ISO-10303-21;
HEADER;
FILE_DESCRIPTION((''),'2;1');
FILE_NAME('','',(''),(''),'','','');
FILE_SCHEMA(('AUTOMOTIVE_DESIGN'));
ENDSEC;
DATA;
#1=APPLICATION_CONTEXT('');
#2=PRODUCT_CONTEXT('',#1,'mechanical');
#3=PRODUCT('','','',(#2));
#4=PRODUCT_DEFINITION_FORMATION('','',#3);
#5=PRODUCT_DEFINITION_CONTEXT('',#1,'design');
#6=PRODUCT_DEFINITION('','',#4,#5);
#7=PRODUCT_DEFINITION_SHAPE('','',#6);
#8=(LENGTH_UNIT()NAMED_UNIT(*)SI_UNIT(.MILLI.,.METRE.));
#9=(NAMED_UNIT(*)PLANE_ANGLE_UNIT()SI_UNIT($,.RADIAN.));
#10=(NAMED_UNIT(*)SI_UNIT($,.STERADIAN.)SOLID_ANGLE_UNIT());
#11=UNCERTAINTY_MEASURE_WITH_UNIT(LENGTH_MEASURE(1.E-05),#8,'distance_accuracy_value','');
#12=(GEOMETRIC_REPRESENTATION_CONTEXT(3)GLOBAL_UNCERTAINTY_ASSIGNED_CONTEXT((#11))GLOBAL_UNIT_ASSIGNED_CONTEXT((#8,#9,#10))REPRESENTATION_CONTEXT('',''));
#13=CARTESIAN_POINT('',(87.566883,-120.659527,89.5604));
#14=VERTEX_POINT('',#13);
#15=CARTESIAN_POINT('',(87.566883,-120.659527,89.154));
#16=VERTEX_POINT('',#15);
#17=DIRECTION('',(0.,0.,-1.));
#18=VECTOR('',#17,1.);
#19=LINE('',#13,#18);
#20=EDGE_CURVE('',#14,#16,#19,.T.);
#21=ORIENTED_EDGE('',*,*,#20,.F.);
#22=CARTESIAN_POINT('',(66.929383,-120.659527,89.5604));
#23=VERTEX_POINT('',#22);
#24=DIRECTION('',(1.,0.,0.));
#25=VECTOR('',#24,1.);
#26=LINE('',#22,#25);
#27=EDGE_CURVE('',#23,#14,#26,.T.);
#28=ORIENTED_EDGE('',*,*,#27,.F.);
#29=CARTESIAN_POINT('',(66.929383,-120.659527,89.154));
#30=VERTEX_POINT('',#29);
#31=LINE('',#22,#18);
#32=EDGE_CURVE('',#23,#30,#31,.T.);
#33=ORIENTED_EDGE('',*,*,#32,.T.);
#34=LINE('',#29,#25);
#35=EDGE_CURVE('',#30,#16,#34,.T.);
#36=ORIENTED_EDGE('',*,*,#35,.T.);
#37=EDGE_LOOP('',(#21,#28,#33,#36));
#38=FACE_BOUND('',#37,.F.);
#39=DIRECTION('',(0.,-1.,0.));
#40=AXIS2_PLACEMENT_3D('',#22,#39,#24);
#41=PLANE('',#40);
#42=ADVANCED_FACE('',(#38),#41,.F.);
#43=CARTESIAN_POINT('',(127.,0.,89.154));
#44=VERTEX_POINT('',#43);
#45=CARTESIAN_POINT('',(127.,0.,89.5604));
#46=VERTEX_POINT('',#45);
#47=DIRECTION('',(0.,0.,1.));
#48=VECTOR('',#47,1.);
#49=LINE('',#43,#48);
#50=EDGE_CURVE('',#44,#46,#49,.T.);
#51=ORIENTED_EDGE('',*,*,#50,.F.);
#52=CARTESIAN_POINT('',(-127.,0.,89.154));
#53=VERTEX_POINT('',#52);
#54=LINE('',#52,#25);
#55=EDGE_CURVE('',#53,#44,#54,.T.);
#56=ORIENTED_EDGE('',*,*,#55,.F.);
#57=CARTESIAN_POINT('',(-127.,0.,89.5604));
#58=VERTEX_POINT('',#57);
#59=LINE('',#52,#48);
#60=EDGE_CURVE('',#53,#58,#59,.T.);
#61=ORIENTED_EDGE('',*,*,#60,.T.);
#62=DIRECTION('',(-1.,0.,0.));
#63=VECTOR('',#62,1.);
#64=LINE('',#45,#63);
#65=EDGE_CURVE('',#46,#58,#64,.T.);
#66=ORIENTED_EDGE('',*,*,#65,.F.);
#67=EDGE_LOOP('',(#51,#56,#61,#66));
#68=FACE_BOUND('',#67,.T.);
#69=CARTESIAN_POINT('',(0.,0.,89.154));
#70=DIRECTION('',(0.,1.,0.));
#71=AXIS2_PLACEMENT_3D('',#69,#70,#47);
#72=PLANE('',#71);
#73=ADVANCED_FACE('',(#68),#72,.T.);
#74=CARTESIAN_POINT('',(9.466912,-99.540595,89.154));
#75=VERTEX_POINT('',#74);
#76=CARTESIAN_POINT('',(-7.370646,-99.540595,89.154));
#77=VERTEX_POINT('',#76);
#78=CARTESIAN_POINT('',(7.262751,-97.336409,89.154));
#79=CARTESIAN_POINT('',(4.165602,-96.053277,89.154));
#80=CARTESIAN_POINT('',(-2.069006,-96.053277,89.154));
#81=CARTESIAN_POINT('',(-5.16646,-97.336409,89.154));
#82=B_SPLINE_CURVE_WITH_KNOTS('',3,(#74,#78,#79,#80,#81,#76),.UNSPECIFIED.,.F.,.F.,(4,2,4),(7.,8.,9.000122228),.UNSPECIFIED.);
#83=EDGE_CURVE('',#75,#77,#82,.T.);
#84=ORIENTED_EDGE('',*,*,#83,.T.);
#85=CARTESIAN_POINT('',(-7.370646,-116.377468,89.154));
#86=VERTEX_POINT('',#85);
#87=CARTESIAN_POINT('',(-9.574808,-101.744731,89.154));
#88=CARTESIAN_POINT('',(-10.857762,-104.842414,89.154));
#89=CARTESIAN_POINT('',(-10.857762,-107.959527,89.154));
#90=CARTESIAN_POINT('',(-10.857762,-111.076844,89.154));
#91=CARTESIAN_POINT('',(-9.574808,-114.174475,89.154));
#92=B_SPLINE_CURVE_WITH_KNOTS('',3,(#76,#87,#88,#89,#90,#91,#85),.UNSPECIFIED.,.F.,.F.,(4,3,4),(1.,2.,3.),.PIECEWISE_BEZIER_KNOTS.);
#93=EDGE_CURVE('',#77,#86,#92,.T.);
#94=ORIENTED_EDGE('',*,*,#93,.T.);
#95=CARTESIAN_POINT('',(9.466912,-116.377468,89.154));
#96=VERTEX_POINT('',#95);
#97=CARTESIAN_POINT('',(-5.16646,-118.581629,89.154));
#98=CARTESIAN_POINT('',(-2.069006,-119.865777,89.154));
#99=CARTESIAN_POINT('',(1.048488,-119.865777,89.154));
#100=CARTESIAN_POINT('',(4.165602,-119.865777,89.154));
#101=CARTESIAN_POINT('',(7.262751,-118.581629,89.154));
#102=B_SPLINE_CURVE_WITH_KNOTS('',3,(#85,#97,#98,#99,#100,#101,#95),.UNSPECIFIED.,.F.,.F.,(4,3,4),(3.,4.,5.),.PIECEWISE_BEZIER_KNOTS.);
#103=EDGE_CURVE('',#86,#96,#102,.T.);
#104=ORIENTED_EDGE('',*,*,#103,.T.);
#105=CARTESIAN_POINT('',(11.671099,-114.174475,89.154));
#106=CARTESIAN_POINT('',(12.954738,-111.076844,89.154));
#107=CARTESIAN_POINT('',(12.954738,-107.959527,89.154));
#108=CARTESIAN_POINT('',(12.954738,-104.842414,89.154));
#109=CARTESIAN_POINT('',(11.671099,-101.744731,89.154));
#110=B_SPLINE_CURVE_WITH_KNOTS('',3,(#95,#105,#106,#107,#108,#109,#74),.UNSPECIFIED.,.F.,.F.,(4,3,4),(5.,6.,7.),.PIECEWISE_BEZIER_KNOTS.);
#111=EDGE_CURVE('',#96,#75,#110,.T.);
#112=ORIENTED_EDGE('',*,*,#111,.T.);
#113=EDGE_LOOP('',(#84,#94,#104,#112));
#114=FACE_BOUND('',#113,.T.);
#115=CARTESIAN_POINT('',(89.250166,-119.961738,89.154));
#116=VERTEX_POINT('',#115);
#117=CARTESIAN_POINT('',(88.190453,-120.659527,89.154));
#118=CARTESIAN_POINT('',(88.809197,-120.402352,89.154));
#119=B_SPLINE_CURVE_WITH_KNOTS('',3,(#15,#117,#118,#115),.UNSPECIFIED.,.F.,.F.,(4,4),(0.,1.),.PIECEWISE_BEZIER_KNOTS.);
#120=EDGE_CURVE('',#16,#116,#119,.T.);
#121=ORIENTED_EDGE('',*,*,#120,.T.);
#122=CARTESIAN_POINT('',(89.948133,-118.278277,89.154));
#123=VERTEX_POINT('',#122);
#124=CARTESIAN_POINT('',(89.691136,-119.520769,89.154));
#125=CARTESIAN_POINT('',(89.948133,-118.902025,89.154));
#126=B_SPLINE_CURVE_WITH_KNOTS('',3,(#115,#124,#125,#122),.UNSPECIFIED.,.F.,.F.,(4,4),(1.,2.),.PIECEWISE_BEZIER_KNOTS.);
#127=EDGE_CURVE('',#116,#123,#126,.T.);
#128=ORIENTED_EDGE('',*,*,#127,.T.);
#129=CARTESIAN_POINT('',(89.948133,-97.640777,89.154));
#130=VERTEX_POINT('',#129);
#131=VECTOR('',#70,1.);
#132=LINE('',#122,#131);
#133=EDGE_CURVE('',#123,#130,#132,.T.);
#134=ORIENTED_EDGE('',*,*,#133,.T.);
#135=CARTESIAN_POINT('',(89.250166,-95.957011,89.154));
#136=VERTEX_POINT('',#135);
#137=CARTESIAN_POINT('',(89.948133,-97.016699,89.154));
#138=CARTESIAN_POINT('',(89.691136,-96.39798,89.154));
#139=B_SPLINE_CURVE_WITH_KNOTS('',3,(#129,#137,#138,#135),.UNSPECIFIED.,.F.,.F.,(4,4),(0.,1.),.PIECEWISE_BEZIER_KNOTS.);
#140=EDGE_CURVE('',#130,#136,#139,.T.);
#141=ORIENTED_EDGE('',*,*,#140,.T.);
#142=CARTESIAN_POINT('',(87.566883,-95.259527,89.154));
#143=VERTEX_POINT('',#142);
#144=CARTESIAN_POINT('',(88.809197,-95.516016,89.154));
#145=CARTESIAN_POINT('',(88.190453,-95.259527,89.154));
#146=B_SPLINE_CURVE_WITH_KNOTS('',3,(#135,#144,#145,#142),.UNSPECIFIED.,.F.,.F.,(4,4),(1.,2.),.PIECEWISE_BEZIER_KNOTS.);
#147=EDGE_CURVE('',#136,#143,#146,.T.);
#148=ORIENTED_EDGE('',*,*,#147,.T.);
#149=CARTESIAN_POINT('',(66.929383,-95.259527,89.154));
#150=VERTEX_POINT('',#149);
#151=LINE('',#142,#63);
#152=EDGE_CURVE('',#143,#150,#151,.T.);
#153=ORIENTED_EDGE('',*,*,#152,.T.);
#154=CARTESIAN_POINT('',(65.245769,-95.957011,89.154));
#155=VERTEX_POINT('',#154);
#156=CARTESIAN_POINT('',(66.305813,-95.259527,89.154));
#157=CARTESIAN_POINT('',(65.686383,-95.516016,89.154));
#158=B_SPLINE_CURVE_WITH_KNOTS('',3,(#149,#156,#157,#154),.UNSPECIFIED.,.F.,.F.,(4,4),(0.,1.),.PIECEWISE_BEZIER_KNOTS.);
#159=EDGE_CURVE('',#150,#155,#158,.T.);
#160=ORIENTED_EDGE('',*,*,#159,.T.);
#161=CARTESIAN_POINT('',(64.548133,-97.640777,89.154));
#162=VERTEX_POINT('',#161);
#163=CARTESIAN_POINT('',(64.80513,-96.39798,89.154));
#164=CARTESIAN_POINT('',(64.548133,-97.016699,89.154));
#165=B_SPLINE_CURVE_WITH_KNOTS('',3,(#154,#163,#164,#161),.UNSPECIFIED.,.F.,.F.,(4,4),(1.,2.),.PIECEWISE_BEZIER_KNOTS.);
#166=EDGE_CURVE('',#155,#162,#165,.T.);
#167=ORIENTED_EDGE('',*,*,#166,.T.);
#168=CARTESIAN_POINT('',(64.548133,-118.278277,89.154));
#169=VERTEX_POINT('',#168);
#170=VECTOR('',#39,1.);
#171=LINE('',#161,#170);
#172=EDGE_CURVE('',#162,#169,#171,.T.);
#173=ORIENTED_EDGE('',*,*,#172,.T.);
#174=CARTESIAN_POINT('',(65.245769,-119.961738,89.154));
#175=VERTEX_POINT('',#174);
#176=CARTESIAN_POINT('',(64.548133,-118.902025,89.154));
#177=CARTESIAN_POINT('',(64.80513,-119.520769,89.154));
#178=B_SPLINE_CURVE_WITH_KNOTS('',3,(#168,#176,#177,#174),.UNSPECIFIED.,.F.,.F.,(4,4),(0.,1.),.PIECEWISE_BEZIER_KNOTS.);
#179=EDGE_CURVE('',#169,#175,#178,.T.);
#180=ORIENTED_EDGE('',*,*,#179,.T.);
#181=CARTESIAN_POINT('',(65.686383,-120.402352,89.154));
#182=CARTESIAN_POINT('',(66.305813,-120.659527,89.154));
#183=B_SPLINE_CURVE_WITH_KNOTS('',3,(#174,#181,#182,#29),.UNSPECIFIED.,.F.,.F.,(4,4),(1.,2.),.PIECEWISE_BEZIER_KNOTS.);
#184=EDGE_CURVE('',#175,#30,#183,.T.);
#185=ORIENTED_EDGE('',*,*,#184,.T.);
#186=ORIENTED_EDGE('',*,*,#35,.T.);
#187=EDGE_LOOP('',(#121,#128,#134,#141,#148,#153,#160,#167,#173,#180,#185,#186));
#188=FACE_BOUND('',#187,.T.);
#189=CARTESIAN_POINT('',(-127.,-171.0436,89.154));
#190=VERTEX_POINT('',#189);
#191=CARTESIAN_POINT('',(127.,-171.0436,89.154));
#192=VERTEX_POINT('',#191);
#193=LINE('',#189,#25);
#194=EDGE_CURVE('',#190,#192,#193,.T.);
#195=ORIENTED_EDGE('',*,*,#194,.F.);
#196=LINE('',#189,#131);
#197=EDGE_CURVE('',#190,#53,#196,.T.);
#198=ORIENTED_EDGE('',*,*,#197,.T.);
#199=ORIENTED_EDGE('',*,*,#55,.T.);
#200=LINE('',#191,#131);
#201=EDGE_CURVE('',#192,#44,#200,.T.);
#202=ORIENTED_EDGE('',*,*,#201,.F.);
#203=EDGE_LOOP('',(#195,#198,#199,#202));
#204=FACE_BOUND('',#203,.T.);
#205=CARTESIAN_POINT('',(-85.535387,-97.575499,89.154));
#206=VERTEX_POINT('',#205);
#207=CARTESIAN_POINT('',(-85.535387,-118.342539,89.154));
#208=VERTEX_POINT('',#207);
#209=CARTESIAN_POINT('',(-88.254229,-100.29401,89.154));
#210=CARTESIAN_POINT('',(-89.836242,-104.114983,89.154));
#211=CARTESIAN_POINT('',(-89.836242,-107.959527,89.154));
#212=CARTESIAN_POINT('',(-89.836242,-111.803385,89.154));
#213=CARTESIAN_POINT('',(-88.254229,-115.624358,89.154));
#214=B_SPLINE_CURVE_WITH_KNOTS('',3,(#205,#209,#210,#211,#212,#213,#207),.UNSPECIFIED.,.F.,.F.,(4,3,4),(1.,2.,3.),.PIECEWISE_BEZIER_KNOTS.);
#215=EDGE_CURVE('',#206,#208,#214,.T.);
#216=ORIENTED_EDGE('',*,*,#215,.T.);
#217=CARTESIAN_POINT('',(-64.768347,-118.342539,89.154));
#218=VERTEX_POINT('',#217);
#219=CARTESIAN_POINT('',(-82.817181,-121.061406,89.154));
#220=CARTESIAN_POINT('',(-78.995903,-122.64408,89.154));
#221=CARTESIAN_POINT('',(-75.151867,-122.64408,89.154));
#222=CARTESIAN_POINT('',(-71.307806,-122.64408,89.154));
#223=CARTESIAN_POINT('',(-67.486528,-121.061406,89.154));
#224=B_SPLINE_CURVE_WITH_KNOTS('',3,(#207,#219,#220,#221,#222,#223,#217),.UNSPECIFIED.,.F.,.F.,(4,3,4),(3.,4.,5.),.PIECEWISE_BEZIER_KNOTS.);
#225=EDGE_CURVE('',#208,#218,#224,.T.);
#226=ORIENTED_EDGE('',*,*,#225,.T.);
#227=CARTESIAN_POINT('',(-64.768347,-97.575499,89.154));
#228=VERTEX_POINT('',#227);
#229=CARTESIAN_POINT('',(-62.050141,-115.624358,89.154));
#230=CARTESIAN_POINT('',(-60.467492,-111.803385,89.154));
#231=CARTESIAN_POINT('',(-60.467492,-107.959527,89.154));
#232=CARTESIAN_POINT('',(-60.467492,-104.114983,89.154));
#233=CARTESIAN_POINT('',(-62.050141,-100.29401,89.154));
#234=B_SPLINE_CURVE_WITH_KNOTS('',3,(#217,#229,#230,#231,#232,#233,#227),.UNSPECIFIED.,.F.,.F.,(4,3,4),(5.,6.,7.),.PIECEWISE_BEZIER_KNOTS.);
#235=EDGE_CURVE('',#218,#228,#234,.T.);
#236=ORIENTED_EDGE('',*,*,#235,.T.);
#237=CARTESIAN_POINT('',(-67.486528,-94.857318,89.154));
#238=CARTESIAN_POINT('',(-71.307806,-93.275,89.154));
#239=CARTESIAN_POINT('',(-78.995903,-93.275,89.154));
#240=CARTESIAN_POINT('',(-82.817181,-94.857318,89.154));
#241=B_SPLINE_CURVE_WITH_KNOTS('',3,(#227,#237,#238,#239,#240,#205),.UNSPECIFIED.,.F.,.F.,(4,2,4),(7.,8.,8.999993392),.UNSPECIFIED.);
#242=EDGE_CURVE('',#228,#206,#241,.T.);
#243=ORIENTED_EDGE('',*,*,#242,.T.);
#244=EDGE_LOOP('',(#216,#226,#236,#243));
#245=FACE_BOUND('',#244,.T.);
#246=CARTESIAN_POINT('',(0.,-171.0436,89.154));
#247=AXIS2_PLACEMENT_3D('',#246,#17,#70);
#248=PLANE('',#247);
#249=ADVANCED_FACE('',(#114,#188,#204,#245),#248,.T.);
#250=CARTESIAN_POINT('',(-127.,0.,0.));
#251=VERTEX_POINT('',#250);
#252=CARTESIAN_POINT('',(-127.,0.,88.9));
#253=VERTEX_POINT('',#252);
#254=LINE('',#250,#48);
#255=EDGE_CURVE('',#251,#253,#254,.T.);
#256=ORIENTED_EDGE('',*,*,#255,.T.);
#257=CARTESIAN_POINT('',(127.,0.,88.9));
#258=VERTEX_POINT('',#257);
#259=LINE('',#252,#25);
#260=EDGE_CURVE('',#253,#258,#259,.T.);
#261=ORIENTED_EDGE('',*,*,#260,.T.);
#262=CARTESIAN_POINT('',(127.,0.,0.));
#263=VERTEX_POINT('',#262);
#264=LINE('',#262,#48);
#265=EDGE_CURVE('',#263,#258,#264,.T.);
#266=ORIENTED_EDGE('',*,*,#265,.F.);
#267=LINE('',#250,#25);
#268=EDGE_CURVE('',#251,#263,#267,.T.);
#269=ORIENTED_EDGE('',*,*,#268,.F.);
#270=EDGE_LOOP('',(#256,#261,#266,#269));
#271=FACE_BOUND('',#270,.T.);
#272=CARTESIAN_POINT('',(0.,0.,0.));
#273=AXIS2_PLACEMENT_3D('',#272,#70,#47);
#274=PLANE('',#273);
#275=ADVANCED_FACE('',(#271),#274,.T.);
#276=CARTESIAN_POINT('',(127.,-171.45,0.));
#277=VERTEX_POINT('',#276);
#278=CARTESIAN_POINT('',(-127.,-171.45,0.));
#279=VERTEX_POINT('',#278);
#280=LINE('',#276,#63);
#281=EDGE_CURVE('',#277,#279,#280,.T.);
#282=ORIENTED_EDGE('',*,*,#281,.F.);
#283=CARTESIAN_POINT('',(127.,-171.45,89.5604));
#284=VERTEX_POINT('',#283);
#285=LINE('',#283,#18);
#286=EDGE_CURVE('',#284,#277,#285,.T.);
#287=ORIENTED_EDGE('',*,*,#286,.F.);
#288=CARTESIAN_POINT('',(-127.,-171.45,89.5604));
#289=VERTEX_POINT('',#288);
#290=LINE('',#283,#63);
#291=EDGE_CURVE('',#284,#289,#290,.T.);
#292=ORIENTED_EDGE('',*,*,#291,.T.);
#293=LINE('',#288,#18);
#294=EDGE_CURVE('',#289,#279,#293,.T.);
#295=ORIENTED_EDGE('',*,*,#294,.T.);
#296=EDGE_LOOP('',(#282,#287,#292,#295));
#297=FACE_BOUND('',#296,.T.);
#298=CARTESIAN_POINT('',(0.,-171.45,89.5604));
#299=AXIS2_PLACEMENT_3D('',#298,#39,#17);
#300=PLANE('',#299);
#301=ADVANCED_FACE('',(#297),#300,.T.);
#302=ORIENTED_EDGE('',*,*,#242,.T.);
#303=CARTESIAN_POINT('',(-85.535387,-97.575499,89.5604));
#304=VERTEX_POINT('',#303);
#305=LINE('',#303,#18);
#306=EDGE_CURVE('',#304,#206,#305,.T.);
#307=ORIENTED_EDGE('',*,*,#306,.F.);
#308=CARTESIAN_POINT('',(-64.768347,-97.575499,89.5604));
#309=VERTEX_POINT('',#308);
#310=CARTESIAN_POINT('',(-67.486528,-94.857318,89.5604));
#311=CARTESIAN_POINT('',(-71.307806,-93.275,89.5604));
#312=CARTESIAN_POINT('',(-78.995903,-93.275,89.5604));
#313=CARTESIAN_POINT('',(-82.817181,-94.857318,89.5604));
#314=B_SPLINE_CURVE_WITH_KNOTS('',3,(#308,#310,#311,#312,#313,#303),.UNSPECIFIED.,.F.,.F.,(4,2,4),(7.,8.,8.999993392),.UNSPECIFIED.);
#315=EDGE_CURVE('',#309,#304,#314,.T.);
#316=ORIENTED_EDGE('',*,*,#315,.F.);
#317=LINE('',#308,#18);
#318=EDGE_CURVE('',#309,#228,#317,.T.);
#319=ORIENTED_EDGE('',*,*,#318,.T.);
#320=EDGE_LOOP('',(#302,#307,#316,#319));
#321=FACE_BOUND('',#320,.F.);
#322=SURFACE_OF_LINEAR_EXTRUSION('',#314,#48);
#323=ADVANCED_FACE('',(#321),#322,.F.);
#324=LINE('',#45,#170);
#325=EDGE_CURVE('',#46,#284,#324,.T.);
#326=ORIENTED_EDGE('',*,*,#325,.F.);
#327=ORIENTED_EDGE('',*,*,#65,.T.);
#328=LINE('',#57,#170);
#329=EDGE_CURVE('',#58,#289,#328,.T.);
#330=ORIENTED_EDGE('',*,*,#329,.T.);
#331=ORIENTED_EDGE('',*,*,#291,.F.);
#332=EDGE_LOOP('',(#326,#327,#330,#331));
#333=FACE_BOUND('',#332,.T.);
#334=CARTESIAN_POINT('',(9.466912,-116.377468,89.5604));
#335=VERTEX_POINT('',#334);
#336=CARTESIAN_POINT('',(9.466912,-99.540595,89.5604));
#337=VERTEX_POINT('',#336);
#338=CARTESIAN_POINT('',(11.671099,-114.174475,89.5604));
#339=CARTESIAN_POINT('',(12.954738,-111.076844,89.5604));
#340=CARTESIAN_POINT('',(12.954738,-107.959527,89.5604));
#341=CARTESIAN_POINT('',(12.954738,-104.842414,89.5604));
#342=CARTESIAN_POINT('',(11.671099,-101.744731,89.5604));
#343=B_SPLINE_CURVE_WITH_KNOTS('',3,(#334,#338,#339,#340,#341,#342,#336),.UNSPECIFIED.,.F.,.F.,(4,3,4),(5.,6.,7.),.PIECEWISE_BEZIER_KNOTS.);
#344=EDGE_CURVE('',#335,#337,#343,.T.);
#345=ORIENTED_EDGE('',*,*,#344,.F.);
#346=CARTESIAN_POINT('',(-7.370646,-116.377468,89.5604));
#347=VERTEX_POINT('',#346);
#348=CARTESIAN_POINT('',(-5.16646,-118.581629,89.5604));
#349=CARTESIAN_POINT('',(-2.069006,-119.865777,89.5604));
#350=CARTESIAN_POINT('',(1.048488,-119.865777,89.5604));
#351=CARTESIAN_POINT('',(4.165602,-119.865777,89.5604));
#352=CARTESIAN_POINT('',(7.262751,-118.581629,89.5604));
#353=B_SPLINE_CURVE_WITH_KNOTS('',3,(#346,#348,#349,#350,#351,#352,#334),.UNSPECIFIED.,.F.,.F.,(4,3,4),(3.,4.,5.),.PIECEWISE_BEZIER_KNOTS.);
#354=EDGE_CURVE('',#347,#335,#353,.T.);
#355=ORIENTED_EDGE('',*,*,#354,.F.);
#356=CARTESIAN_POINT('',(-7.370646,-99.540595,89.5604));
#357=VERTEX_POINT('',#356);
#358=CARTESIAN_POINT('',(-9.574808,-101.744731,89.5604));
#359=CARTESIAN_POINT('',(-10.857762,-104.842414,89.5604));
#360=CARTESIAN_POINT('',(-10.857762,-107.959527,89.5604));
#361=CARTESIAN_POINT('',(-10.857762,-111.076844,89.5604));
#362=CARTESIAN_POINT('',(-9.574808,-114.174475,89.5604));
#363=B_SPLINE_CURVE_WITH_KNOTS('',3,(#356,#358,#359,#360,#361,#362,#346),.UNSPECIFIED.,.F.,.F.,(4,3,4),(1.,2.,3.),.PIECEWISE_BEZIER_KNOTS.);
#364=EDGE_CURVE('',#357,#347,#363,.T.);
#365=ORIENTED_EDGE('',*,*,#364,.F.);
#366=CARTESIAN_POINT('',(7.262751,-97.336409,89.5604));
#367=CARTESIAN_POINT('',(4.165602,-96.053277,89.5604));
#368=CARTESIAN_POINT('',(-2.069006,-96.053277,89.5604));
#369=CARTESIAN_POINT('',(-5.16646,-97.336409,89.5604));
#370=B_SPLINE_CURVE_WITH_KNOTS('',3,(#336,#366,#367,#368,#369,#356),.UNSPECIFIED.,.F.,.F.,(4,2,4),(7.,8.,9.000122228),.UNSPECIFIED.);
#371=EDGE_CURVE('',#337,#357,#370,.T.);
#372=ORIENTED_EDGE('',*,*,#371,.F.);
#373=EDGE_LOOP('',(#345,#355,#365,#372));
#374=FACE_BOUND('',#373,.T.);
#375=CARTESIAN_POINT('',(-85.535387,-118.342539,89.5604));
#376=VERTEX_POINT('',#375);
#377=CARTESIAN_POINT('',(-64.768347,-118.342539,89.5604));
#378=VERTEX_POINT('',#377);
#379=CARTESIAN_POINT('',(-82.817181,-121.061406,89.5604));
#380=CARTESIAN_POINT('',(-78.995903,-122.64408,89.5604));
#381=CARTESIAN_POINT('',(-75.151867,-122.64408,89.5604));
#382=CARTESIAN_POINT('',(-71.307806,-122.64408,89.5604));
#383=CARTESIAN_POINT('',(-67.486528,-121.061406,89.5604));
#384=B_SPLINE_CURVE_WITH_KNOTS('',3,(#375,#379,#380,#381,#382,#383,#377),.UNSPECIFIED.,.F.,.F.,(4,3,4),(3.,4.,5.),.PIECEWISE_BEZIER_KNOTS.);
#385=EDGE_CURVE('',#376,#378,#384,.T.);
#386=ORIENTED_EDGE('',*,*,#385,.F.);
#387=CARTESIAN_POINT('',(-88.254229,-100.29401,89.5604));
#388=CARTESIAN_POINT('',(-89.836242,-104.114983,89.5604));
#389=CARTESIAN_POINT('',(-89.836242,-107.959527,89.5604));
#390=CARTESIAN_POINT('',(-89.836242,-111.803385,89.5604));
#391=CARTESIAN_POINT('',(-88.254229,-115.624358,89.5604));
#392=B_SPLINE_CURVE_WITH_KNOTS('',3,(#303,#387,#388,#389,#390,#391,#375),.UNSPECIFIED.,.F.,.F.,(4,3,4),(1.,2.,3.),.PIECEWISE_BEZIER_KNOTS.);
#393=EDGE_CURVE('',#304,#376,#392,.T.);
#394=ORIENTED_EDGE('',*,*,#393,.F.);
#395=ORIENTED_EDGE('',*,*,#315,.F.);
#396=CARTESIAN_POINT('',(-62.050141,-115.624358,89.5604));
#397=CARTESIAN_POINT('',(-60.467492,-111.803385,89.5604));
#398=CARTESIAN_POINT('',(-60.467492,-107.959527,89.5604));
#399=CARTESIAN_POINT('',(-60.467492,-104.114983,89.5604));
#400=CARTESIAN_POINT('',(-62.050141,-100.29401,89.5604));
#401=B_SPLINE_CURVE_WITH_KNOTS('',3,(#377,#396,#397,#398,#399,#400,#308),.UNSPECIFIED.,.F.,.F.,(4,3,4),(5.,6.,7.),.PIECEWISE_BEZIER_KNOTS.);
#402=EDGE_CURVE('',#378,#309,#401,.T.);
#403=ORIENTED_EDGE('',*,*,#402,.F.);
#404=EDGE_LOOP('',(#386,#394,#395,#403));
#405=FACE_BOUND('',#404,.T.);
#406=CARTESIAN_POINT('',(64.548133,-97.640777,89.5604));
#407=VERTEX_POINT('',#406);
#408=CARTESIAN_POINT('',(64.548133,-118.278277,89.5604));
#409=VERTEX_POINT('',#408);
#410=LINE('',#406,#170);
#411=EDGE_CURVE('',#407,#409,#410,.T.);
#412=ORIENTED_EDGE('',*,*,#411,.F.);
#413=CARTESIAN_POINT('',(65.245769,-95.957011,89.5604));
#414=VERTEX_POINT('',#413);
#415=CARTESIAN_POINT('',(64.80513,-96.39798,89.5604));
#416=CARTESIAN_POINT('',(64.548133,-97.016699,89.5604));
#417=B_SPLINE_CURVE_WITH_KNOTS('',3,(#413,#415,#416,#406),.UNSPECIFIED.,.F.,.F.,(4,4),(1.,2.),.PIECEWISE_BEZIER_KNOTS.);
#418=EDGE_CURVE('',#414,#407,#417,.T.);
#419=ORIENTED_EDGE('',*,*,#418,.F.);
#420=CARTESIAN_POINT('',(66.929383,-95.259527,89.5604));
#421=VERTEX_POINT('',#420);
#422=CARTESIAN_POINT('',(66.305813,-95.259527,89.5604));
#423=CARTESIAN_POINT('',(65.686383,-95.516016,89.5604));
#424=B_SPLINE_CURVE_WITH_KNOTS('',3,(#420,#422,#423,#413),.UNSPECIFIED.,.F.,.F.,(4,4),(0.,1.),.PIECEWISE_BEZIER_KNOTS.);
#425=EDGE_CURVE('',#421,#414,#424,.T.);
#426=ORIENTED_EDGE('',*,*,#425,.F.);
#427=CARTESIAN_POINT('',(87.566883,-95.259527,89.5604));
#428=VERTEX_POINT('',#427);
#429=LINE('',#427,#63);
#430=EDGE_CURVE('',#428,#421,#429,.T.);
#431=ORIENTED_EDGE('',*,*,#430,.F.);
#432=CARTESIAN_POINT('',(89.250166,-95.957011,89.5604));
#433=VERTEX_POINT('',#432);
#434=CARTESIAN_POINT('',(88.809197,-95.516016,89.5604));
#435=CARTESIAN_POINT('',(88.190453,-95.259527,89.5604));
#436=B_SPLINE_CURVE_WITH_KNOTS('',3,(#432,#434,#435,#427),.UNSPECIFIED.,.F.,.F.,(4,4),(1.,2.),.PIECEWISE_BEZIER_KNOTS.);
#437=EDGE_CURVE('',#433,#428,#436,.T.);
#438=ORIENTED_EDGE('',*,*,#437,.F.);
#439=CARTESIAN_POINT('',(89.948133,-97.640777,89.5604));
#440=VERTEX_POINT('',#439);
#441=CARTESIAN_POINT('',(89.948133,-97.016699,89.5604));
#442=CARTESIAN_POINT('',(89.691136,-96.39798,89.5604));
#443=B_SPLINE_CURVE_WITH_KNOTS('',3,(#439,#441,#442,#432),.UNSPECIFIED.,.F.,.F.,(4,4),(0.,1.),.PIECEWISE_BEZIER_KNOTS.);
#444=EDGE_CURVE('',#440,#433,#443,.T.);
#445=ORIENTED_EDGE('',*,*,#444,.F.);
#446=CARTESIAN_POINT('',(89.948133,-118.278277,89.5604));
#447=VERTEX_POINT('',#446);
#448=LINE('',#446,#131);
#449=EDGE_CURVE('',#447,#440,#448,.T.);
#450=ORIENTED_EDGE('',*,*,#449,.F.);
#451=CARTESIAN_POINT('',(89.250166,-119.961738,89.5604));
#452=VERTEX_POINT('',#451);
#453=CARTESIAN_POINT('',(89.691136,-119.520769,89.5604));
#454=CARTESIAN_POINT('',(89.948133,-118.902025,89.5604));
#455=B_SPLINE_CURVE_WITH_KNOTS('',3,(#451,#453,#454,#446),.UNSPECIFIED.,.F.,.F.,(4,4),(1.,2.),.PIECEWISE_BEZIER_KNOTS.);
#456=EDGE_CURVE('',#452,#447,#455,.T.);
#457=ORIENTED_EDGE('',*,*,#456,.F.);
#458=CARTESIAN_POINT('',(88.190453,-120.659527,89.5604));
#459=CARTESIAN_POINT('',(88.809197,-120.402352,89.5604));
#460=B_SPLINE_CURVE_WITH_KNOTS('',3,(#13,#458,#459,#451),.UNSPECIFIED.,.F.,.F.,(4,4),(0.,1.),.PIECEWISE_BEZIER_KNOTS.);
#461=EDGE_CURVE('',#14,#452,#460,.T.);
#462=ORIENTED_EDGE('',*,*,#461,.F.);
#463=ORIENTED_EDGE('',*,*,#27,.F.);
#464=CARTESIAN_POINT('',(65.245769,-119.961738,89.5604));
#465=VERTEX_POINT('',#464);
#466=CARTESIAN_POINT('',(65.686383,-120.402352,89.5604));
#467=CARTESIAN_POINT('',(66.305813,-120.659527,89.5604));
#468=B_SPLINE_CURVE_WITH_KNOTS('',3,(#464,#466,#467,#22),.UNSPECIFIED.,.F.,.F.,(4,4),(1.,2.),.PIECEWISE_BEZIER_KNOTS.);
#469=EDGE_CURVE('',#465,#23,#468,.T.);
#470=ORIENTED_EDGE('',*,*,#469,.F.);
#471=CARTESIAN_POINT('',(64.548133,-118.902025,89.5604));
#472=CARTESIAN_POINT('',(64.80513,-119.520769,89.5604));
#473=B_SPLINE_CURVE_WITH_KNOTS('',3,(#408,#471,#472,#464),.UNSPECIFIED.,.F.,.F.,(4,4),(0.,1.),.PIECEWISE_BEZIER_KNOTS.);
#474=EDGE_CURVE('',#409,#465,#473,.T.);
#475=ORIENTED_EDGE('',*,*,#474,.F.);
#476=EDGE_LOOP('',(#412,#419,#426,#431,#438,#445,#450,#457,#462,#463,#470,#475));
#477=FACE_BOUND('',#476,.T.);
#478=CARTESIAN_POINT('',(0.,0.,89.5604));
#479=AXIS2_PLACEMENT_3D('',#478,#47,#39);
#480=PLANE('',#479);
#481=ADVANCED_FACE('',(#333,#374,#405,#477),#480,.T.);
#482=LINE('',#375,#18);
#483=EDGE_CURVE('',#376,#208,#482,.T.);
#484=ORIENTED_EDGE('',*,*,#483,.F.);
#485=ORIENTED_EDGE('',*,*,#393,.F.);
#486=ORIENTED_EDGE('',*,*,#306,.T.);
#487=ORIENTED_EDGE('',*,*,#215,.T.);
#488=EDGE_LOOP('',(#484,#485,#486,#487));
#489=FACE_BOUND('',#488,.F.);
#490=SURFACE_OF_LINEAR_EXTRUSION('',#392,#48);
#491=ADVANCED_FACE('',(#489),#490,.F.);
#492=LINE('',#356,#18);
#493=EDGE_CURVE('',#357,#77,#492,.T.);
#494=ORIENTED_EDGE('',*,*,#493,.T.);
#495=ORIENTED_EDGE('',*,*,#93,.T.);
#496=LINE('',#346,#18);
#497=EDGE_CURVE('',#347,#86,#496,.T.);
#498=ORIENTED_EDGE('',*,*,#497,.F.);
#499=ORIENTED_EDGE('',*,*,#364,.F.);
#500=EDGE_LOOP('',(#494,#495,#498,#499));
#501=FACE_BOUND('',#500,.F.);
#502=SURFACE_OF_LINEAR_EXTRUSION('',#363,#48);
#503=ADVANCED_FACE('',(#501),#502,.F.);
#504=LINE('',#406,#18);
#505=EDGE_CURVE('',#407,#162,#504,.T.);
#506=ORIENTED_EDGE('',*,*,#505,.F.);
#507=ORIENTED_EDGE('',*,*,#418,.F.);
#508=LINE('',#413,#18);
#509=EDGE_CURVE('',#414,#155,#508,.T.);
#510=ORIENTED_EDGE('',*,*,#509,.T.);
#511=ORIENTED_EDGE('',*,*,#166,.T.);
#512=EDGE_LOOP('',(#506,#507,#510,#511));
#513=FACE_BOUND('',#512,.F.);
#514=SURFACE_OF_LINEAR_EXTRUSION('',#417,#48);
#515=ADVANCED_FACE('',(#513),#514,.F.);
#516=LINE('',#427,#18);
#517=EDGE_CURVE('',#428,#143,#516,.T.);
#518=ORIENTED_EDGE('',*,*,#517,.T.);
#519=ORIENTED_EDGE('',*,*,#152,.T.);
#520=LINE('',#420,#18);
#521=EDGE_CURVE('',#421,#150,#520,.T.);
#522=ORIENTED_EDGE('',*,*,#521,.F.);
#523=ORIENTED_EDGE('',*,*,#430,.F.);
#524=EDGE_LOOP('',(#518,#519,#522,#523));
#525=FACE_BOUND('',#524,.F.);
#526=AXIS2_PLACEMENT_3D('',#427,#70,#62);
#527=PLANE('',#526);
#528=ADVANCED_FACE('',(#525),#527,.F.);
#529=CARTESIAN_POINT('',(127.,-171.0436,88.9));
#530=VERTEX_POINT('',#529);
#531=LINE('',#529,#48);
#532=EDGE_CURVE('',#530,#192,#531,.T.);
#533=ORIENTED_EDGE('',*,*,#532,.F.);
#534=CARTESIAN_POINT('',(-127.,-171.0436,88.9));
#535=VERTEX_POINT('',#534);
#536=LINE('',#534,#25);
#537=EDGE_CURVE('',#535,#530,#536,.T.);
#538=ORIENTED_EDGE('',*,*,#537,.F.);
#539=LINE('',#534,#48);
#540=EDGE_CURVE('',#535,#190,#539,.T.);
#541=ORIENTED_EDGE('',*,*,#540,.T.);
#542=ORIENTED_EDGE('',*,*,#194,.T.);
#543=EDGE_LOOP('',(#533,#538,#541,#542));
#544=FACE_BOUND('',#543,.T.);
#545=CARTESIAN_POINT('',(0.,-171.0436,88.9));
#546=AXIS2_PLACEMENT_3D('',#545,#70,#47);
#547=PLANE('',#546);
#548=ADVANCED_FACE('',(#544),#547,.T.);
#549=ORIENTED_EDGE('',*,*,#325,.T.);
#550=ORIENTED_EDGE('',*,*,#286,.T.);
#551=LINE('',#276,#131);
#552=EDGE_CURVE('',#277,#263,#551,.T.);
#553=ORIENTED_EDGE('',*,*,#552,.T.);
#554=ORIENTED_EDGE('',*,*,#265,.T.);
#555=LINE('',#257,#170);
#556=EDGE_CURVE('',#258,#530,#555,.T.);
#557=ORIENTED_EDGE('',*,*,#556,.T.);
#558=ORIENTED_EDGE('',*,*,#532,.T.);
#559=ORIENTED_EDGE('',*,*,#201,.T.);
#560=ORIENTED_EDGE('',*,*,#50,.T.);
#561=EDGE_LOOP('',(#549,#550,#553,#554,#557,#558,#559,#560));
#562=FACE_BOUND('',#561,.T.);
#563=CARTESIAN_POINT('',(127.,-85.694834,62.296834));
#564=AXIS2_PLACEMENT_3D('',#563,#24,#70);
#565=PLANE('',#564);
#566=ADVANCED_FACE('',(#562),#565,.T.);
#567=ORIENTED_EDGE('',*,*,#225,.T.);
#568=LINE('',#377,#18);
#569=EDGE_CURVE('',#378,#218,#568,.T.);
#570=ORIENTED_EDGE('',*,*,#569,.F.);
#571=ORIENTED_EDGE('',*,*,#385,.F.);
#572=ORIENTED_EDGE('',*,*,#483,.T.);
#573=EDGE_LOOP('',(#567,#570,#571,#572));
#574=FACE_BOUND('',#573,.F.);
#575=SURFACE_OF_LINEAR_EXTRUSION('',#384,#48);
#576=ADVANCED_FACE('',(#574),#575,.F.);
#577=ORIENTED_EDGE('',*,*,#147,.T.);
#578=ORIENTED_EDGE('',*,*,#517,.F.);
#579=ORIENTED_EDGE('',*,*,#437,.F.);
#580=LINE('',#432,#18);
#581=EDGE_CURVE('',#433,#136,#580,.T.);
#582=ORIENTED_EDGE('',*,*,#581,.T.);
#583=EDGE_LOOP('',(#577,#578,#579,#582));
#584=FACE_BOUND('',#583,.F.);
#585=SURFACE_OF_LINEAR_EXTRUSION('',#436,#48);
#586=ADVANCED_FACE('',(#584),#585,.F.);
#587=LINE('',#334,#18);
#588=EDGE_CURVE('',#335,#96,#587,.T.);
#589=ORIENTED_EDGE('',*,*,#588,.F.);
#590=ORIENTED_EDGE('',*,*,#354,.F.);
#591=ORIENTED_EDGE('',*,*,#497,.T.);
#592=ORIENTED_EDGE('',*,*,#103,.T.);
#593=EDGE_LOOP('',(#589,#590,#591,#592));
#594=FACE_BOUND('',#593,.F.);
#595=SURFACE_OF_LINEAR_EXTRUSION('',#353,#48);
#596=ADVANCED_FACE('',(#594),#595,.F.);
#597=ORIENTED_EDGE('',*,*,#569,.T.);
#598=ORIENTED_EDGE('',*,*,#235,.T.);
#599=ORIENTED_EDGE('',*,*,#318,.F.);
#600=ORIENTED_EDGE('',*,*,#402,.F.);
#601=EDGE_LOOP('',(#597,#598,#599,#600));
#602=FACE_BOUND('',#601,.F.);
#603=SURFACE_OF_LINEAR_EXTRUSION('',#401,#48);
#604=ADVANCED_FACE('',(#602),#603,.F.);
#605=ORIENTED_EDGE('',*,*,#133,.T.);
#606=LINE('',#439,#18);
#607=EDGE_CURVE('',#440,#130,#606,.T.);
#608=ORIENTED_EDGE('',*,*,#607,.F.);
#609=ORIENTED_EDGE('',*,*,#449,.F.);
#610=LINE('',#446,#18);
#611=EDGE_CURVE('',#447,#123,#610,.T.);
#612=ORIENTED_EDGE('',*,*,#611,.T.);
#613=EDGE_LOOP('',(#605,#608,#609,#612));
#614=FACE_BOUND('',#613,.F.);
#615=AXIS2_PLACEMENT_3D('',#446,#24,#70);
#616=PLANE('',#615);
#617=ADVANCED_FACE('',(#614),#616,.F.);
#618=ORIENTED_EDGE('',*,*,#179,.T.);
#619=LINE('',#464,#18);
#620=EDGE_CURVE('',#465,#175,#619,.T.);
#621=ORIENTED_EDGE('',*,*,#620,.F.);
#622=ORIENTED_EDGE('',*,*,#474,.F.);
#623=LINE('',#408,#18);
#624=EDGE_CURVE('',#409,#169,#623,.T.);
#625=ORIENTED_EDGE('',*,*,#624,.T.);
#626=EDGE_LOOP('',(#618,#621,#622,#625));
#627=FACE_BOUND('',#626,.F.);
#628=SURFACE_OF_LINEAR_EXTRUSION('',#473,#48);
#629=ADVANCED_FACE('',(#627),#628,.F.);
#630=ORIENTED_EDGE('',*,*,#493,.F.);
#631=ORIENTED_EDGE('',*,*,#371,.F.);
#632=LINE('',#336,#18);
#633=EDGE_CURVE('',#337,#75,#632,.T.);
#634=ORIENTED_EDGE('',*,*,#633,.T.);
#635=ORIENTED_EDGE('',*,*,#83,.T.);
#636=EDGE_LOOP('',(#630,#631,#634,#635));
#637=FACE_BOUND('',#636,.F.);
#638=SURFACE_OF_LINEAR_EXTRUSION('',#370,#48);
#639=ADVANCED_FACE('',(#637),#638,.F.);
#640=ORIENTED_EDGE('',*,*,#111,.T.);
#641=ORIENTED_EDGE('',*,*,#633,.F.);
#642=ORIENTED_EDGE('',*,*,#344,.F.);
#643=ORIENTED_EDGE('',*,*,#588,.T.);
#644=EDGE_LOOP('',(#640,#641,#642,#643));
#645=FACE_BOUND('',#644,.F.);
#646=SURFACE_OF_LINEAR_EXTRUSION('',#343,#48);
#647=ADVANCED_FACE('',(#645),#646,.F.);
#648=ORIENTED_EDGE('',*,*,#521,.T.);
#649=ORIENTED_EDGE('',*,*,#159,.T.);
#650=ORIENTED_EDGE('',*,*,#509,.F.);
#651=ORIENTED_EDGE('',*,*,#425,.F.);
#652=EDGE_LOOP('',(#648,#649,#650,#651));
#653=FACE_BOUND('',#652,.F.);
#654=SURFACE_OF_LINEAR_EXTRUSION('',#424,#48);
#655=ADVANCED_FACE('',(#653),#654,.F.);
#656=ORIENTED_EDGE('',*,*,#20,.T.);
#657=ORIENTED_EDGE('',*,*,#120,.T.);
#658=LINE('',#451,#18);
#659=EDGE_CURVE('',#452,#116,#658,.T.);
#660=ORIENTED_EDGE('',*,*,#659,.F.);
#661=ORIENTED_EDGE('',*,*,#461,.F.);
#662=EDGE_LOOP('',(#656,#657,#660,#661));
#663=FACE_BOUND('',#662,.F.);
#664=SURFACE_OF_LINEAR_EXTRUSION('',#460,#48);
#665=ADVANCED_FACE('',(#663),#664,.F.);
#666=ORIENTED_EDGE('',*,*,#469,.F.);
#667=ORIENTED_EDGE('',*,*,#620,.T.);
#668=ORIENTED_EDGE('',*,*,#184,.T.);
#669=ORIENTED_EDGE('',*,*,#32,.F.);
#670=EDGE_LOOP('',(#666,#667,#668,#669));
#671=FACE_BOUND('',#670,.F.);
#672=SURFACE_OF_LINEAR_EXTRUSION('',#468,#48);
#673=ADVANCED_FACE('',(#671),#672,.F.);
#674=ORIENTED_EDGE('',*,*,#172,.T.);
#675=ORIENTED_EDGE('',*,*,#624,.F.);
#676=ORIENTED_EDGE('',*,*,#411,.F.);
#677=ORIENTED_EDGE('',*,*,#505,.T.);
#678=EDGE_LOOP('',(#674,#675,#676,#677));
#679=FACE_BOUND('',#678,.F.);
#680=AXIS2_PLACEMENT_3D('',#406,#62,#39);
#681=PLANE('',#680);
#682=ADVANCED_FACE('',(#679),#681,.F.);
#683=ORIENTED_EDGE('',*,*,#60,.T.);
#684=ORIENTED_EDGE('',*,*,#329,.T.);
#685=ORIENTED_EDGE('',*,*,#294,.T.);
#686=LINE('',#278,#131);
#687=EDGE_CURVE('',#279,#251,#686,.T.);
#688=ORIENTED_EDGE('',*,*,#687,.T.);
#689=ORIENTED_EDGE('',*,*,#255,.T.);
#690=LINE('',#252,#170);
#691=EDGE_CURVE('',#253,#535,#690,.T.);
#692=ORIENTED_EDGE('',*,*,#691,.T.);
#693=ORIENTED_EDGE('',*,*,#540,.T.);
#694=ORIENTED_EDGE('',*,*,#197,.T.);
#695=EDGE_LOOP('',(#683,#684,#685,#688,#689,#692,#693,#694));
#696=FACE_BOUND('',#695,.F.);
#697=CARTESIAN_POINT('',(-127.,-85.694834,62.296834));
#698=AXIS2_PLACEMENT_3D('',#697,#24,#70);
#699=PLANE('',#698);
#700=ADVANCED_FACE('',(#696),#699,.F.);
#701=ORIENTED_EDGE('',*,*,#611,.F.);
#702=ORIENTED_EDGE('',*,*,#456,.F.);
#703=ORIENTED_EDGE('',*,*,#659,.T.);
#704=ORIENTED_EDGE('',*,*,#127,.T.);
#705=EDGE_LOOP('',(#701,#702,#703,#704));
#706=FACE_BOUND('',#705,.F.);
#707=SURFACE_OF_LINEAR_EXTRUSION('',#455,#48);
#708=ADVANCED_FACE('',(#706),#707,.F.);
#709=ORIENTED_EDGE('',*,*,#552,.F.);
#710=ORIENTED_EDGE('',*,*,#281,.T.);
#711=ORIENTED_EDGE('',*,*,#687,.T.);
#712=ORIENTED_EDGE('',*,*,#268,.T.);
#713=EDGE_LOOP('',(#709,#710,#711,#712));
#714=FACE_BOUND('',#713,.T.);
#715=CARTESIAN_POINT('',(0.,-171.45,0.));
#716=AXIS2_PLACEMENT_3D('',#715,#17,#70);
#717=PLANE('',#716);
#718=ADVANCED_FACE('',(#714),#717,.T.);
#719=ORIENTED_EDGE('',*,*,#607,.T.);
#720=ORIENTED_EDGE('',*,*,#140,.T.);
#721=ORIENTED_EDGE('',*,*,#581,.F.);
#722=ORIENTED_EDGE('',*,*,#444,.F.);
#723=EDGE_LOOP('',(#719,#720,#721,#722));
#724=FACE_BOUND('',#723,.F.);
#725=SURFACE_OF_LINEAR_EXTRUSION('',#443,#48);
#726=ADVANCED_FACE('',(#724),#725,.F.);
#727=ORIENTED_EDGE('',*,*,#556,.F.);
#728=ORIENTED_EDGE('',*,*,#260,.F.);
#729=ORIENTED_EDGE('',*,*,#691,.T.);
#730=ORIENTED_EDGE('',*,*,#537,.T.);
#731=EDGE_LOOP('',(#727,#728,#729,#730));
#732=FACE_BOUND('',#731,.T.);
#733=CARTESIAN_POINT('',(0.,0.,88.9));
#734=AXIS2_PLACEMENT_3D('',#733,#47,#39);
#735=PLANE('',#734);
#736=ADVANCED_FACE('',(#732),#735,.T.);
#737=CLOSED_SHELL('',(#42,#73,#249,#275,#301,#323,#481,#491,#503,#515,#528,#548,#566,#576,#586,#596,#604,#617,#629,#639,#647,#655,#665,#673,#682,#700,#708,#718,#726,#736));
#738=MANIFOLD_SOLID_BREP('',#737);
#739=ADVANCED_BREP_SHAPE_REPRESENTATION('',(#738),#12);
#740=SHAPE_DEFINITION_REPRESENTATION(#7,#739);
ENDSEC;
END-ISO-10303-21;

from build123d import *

# Parameters (mm, degrees)
F1_DEPTH = 127
F3_DEPTH = 0.4064


# Not quite as in the source:
# - the dataset's text gives a spline's control points without its knots; the knots are read off the source's solid


with BuildPart() as f1:
    # F0 (on Right) → F1 (new body, symmetric)
    with BuildSketch(Plane.YZ):
        Polygon((-171.45, 0), (0, 0), (0, 88.9), (-171.0436, 88.9), (-171.0436, 89.154), (0, 89.154), (0, 89.5604), (-171.45, 89.5604), align=None)
    extrude(amount=F1_DEPTH, both=True)

    # F2 (on face) → F3 (cut, through all)
    with BuildSketch(Plane.XY.offset(89.5604)):
        with BuildLine():
            add(Edge.make_bspline(
                [(89.2501661772, -119.9617381969), (89.6911355772, -119.5207687969), (89.9481327772, -118.9020247969), (89.9481327772, -118.2782769969)],
                knots=[1, 1, 1, 1, 2, 2, 2, 2], degree=3))
            Line((89.9481327772, -118.2782769969), (89.9481327772, -97.6407769969))
            add(Edge.make_bspline(
                [(89.9481327772, -97.6407769969), (89.9481327772, -97.0166989969), (89.6911355772, -96.3979803969), (89.2501661772, -95.9570109969)],
                knots=[0, 0, 0, 0, 1, 1, 1, 1], degree=3))
            add(Edge.make_bspline(
                [(89.2501661772, -95.9570109969), (88.8091967772, -95.5160161969), (88.1904527772, -95.2595269969), (87.5668827772, -95.2595269969)],
                knots=[1, 1, 1, 1, 2, 2, 2, 2], degree=3))
            Line((87.5668827772, -95.2595269969), (66.9293827772, -95.2595269969))
            add(Edge.make_bspline(
                [(66.9293827772, -95.2595269969), (66.3058127772, -95.2595269969), (65.6863829772, -95.5160161969), (65.2457691772, -95.9570109969)],
                knots=[0, 0, 0, 0, 1, 1, 1, 1], degree=3))
            add(Edge.make_bspline(
                [(65.2457691772, -95.9570109969), (64.8051299772, -96.3979803969), (64.5481327772, -97.0166989969), (64.5481327772, -97.6407769969)],
                knots=[1, 1, 1, 1, 2, 2, 2, 2], degree=3))
            Line((64.5481327772, -97.6407769969), (64.5481327772, -118.2782769969))
            add(Edge.make_bspline(
                [(64.5481327772, -118.2782769969), (64.5481327772, -118.9020247969), (64.8051299772, -119.5207687969), (65.2457691772, -119.9617381969)],
                knots=[0, 0, 0, 0, 1, 1, 1, 1], degree=3))
            add(Edge.make_bspline(
                [(65.2457691772, -119.9617381969), (65.6863829772, -120.4023519969), (66.3058127772, -120.6595269969), (66.9293827772, -120.6595269969)],
                knots=[1, 1, 1, 1, 2, 2, 2, 2], degree=3))
            Line((66.9293827772, -120.6595269969), (87.5668827772, -120.6595269969))
            add(Edge.make_bspline(
                [(87.5668827772, -120.6595269969), (88.1904527772, -120.6595269969), (88.8091967772, -120.4023519969), (89.2501661772, -119.9617381969)],
                knots=[0, 0, 0, 0, 1, 1, 1, 1], degree=3))
        make_face()
        with BuildLine():
            add(Edge.make_bspline(
                [(-64.7683472228, -97.5754989969), (-67.4865282228, -94.8573179969), (-71.3078058228, -93.2749995969), (-75.1518672228, -93.2749995969)],
                knots=[7, 7, 7, 7, 8, 8, 8, 8], degree=3))
            add(Edge.make_bspline(
                [(-75.1518672228, -93.2749995969), (-78.9959032228, -93.2749995969), (-82.8171808228, -94.8573179969), (-85.5353872228, -97.5754989969)],
                knots=[0, 0, 0, 0, 1, 1, 1, 1], degree=3))
            add(Edge.make_bspline(
                [(-85.5353872228, -97.5754989969), (-88.2542286228, -100.2940101969), (-89.8362422228, -104.1149829969), (-89.8362422228, -107.9595269969), (-89.8362422228, -111.8033851969), (-88.2542286228, -115.6243579969), (-85.5353872228, -118.3425389969)],
                knots=[1, 1, 1, 1, 2, 2, 2, 3, 3, 3, 3], degree=3))
            add(Edge.make_bspline(
                [(-85.5353872228, -118.3425389969), (-82.8171808228, -121.0614057969), (-78.9959032228, -122.6440797969), (-75.1518672228, -122.6440797969), (-71.3078058228, -122.6440797969), (-67.4865282228, -121.0614057969), (-64.7683472228, -118.3425389969)],
                knots=[3, 3, 3, 3, 4, 4, 4, 5, 5, 5, 5], degree=3))
            add(Edge.make_bspline(
                [(-64.7683472228, -118.3425389969), (-62.0501408228, -115.6243579969), (-60.4674922228, -111.8033851969), (-60.4674922228, -107.9595269969), (-60.4674922228, -104.1149829969), (-62.0501408228, -100.2940101969), (-64.7683472228, -97.5754989969)],
                knots=[5, 5, 5, 5, 6, 6, 6, 7, 7, 7, 7], degree=3))
        make_face()
        with BuildLine():
            add(Edge.make_bspline(
                [(9.4669119772, -99.5405953969), (7.2627507772, -97.3364087969), (4.1656017772, -96.0532769969), (1.0484883772, -96.0532769969)],
                knots=[7, 7, 7, 7, 8, 8, 8, 8], degree=3))
            add(Edge.make_bspline(
                [(1.0484883772, -96.0532769969), (-2.0690060228, -96.0532769969), (-5.1664598228, -97.3364087969), (-7.3706464228, -99.5405953969)],
                knots=[0, 0, 0, 0, 1, 1, 1, 1], degree=3))
            add(Edge.make_bspline(
                [(-7.3706464228, -99.5405953969), (-9.5748076228, -101.7447311969), (-10.8577616228, -104.8424135969), (-10.8577616228, -107.9595269969), (-10.8577616228, -111.0768435969), (-9.5748076228, -114.1744751969), (-7.3706464228, -116.3774679969)],
                knots=[1, 1, 1, 1, 2, 2, 2, 3, 3, 3, 3], degree=3))
            add(Edge.make_bspline(
                [(-7.3706464228, -116.3774679969), (-5.1664598228, -118.5816291969), (-2.0690060228, -119.8657769969), (1.0484883772, -119.8657769969), (4.1656017772, -119.8657769969), (7.2627507772, -118.5816291969), (9.4669119772, -116.3774679969)],
                knots=[3, 3, 3, 3, 4, 4, 4, 5, 5, 5, 5], degree=3))
            add(Edge.make_bspline(
                [(9.4669119772, -116.3774679969), (11.6710985772, -114.1744751969), (12.9547383772, -111.0768435969), (12.9547383772, -107.9595269969), (12.9547383772, -104.8424135969), (11.6710985772, -101.7447311969), (9.4669119772, -99.5405953969)],
                knots=[5, 5, 5, 5, 6, 6, 6, 7, 7, 7, 7], degree=3))
        make_face()
    extrude(amount=-F3_DEPTH, mode=Mode.SUBTRACT)


solid = f1.part
